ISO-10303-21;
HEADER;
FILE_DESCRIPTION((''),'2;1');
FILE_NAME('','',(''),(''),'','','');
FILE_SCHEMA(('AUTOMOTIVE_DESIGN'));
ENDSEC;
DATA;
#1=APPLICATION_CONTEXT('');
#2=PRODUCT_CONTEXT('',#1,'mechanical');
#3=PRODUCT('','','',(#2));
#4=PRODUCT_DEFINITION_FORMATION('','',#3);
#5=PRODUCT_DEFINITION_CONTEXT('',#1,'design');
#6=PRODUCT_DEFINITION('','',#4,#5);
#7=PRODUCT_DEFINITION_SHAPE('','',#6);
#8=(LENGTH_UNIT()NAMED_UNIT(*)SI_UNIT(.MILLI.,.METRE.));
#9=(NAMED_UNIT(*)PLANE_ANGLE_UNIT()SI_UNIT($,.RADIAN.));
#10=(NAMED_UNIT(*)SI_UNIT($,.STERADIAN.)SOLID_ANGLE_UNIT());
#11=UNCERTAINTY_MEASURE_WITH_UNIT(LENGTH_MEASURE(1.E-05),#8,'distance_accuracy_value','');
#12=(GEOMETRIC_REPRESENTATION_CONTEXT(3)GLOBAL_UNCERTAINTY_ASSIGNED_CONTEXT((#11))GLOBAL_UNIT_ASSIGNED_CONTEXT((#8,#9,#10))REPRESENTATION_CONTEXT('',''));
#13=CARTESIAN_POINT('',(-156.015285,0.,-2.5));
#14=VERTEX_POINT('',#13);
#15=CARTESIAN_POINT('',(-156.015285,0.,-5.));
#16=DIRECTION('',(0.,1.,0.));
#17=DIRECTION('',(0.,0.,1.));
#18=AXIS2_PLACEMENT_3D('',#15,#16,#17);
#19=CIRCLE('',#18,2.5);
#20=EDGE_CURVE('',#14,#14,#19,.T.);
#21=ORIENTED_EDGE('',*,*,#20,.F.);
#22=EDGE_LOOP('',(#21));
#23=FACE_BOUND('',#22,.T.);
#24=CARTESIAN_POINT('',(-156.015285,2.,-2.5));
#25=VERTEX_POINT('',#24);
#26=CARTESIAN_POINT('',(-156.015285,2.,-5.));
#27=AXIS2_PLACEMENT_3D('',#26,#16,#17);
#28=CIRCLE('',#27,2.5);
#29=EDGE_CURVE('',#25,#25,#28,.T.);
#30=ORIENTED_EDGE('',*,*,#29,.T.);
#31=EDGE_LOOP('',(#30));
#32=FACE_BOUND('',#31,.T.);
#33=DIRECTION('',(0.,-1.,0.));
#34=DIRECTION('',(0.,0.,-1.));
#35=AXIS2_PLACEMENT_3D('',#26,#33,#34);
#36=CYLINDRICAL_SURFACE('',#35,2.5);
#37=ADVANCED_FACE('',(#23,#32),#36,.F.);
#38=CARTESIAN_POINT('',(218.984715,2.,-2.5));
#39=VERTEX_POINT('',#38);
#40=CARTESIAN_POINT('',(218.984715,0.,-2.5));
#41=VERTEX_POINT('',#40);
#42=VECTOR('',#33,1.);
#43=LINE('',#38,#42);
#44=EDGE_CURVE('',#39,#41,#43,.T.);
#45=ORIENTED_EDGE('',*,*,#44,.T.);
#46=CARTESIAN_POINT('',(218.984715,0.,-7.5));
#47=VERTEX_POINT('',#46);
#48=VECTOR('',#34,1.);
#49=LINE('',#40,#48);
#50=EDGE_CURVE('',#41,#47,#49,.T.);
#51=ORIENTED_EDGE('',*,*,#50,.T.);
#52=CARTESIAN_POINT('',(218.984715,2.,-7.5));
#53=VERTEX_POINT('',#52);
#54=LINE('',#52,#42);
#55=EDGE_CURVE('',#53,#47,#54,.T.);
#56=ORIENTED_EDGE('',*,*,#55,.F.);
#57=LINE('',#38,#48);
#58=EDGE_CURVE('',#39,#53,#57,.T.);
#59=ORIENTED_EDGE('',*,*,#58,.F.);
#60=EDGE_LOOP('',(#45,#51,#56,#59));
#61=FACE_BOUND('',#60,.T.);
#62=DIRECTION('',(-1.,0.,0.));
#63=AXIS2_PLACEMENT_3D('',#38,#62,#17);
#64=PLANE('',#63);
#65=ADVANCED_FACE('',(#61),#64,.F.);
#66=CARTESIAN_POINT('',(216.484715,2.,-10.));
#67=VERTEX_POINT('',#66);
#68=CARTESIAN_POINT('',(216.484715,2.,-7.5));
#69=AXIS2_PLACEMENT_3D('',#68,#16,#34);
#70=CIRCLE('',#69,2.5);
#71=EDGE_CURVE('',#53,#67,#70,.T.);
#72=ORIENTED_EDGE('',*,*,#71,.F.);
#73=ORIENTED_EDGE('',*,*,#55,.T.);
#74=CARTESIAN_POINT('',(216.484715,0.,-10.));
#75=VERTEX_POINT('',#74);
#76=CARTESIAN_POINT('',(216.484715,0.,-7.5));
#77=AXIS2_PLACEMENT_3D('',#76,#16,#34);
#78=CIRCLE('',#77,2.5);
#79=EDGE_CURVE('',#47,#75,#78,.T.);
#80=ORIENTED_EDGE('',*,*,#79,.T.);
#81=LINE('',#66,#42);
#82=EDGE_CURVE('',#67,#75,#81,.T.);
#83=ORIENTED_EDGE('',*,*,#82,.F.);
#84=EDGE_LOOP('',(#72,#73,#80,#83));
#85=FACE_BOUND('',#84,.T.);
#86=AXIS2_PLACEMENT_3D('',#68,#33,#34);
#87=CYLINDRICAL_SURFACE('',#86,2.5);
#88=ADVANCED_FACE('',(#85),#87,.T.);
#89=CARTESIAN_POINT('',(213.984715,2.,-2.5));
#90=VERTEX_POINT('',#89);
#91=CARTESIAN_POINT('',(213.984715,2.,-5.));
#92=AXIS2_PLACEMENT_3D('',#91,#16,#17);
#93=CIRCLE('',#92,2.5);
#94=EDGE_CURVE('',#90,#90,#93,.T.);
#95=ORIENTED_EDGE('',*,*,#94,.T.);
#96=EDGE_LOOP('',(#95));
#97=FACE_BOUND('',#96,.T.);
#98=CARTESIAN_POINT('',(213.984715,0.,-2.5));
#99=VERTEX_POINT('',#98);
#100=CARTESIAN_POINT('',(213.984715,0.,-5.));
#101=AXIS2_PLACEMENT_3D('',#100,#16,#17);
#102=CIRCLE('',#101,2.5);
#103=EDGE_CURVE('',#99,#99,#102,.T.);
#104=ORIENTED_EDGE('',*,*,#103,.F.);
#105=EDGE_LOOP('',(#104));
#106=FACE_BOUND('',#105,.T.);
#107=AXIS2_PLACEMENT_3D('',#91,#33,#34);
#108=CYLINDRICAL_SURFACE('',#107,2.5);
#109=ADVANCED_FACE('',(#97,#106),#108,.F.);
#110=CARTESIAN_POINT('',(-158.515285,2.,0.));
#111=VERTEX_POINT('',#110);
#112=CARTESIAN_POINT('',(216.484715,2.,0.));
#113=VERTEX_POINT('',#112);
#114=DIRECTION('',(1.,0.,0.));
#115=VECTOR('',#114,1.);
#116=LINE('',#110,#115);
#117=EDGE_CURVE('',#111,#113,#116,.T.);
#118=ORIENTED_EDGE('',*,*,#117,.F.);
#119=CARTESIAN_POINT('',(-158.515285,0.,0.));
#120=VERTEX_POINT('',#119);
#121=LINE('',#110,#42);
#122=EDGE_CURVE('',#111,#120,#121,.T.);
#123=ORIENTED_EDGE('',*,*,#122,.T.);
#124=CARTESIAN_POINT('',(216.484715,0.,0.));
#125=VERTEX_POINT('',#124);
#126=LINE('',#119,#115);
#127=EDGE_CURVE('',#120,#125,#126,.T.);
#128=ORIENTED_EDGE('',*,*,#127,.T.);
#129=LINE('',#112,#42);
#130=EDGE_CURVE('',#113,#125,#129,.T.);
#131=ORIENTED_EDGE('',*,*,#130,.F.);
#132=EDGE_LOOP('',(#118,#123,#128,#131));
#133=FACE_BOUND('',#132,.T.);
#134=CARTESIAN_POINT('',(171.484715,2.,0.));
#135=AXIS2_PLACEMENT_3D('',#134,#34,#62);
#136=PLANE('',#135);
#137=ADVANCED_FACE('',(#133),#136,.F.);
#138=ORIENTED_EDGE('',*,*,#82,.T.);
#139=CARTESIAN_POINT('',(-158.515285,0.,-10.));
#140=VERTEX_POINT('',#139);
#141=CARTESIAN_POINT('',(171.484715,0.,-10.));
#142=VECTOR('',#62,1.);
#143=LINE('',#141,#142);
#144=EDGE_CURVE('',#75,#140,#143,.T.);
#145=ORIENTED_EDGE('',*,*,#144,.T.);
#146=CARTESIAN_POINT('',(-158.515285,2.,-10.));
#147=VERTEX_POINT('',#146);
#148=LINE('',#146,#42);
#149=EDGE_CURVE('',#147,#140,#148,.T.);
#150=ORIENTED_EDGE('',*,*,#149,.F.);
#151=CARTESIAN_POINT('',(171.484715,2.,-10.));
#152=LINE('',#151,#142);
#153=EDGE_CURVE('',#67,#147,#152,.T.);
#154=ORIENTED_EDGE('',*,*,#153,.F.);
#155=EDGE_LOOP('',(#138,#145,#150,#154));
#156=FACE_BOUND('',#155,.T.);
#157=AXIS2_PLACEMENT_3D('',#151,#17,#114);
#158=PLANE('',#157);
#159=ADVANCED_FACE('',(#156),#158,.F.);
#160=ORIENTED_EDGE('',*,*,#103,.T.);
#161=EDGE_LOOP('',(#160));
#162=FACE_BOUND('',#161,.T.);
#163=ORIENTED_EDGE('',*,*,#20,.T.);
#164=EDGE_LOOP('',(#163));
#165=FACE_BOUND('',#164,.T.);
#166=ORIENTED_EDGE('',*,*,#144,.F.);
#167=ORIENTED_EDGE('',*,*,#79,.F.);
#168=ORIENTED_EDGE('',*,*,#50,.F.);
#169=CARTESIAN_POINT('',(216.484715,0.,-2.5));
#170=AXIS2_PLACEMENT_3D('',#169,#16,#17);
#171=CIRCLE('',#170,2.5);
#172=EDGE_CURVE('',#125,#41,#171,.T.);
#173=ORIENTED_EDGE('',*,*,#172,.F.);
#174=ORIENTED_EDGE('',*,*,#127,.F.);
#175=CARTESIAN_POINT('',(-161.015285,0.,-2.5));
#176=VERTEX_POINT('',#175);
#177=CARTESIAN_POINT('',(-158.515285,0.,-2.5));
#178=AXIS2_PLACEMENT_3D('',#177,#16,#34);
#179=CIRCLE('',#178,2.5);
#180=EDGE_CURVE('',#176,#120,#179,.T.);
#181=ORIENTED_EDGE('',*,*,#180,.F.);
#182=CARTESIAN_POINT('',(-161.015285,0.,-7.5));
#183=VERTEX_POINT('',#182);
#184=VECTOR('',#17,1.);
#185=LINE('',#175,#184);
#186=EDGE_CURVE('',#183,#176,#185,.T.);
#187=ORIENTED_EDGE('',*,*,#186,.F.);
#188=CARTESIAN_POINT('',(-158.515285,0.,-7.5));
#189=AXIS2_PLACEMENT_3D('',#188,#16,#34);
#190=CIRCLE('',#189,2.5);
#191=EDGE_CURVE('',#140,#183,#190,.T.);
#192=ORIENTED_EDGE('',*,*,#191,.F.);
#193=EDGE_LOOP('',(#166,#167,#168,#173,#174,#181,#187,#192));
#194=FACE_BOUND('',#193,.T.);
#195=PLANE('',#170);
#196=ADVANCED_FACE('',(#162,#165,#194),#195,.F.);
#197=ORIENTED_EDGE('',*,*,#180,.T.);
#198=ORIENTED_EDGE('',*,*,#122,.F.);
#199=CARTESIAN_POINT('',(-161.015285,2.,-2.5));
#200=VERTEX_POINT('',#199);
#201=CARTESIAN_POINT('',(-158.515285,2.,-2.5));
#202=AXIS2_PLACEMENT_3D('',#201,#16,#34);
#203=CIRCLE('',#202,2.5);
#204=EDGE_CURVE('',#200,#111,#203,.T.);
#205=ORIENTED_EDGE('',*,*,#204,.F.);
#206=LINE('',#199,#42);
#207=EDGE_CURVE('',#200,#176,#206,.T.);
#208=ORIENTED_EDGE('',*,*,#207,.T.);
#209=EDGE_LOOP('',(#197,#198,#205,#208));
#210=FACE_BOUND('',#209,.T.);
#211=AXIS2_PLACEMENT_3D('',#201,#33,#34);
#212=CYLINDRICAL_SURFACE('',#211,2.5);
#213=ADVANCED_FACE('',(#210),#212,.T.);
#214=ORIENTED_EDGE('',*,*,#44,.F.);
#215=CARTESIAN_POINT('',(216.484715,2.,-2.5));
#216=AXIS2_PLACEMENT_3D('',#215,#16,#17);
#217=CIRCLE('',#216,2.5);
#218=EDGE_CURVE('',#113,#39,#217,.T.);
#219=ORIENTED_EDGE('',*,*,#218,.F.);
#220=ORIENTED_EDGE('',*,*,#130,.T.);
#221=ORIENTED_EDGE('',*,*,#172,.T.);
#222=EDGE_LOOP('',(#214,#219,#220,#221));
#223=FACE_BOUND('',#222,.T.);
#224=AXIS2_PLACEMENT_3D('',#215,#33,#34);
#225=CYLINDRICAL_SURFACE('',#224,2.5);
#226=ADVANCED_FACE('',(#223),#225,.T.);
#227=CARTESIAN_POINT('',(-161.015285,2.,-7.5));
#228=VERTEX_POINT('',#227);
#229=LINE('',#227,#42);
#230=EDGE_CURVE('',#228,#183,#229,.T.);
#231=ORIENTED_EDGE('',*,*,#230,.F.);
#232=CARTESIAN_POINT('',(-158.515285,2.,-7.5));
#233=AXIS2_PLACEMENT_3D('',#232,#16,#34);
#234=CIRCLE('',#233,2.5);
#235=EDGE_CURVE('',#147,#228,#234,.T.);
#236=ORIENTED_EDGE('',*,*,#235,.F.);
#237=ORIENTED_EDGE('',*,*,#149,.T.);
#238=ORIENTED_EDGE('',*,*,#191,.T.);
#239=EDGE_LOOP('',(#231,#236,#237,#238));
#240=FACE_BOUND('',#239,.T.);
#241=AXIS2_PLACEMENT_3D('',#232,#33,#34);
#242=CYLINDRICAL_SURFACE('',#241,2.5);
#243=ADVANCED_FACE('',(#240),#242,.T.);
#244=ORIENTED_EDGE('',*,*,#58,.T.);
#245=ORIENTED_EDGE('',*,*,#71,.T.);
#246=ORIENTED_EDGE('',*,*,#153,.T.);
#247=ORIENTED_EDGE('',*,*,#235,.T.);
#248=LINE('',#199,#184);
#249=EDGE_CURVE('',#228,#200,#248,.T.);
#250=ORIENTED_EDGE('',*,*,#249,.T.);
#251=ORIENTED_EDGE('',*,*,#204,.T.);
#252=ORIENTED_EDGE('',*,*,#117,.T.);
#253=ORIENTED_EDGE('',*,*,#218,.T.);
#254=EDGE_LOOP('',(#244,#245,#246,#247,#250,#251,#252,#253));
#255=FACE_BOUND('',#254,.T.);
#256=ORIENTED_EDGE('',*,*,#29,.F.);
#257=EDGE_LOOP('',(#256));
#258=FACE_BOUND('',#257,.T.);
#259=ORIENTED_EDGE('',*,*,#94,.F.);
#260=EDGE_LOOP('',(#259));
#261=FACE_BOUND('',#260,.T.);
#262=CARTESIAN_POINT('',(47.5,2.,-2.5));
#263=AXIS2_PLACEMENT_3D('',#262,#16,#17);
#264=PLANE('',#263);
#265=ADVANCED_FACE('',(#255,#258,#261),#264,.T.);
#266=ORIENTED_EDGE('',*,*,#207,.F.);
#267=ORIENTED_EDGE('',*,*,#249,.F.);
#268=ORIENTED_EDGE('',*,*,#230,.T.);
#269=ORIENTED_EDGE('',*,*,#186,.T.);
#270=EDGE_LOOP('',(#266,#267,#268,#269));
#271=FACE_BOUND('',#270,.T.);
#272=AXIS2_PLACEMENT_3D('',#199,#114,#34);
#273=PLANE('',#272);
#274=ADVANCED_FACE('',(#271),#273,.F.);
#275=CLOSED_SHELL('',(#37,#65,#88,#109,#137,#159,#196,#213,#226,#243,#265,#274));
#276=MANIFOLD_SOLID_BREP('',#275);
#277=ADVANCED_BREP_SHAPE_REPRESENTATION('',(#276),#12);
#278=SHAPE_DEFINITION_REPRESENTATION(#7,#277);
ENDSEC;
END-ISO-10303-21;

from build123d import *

# Parameters (mm, degrees)
SKETCH1_R           = 2.5
BOSS_EXTRUDE2_DEPTH = 2
FLEX1_OUTLINE_R     = 2.5
FLEX1_DEPTH         = 2


# Read off the part's stored shape, not the designer's step: Flex1
with BuildPart() as part:
    # Sketch1 → Boss-Extrude2 (new body)
    with BuildSketch(Plane(origin=(0, 0, 0), x_dir=(1, 0, 0), z_dir=(0, 1, 0))):
        with BuildLine():
            Line((2.5, 0), (47.5, 0))
            ThreePointArc((47.5, 0), (49.267766953, 0.732233047), (50, 2.5))
            Line((50, 2.5), (50, 7.5))
            ThreePointArc((50, 7.5), (49.267766953, 9.267766953), (47.5, 10))
            Line((47.5, 10), (2.5, 10))
            ThreePointArc((2.5, 10), (0.732233047, 9.267766953), (0, 7.5))
            Line((0, 7.5), (0, 2.5))
            ThreePointArc((0, 2.5), (0.732233047, 0.732233047), (2.5, 0))
        make_face()
        with Locations(Location((5, 5, 0), (0, 0, 270))):
            Circle(SKETCH1_R, mode=Mode.SUBTRACT)
        with Locations(Location((45, 5, 0), (0, 0, 270))):
            Circle(SKETCH1_R, mode=Mode.SUBTRACT)
    extrude(amount=BOSS_EXTRUDE2_DEPTH)

    # Flex1 outline → Flex1 (add)
    # profile 1 of 4: a face of its own
    with BuildSketch(Plane(origin=(0, 0, 0), x_dir=(1, 0, 0), z_dir=(0, 1, 0))):
        with BuildLine():
            Line((2.5, 10), (-158.5152852, 10))
            ThreePointArc((-158.5152852, 10), (-160.283052153, 9.267766953), (-161.0152852, 7.5))
            Line((-161.0152852, 7.5), (-161.0152852, 2.5))
            ThreePointArc((-161.0152852, 2.5), (-160.283052153, 0.732233047), (-158.5152852, 0))
            Line((-158.5152852, 0), (2.5, 0))
            ThreePointArc((2.5, 0), (0.732233047, 0.732233047), (0, 2.5))
            Line((0, 2.5), (0, 7.5))
            ThreePointArc((0, 7.5), (0.732233047, 9.267766953), (2.5, 10))
        make_face()
        with Locations((-156.0152852, 5)):
            Circle(FLEX1_OUTLINE_R, mode=Mode.SUBTRACT)
    # profile 2 of 4: a face of its own
    with BuildSketch(Plane(origin=(0, 0, 0), x_dir=(1, 0, 0), z_dir=(0, 1, 0))):
        with BuildLine():
            Line((216.4847148, 10), (47.5, 10))
            ThreePointArc((47.5, 10), (49.267766953, 9.267766953), (50, 7.5))
            Line((50, 7.5), (50, 2.5))
            ThreePointArc((50, 2.5), (49.267766953, 0.732233047), (47.5, 0))
            Line((47.5, 0), (216.4847148, 0))
            ThreePointArc((216.4847148, 0), (218.252481753, 0.732233047), (218.9847148, 2.5))
            Line((218.9847148, 2.5), (218.9847148, 7.5))
            ThreePointArc((218.9847148, 7.5), (218.252481753, 9.267766953), (216.4847148, 10))
        make_face()
        with Locations((213.9847148, 5)):
            Circle(FLEX1_OUTLINE_R, mode=Mode.SUBTRACT)
    # profile 3 of 4: a face of its own
    with BuildSketch(Plane(origin=(0, 0, 0), x_dir=(1, 0, 0), z_dir=(0, 1, 0))):
        with Locations((5, 5)):
            Circle(FLEX1_OUTLINE_R)
    # profile 4 of 4: a face of its own
    with BuildSketch(Plane(origin=(0, 0, 0), x_dir=(1, 0, 0), z_dir=(0, 1, 0))):
        with Locations((45, 5)):
            Circle(FLEX1_OUTLINE_R)
    extrude(amount=FLEX1_DEPTH)


solid = part.part
